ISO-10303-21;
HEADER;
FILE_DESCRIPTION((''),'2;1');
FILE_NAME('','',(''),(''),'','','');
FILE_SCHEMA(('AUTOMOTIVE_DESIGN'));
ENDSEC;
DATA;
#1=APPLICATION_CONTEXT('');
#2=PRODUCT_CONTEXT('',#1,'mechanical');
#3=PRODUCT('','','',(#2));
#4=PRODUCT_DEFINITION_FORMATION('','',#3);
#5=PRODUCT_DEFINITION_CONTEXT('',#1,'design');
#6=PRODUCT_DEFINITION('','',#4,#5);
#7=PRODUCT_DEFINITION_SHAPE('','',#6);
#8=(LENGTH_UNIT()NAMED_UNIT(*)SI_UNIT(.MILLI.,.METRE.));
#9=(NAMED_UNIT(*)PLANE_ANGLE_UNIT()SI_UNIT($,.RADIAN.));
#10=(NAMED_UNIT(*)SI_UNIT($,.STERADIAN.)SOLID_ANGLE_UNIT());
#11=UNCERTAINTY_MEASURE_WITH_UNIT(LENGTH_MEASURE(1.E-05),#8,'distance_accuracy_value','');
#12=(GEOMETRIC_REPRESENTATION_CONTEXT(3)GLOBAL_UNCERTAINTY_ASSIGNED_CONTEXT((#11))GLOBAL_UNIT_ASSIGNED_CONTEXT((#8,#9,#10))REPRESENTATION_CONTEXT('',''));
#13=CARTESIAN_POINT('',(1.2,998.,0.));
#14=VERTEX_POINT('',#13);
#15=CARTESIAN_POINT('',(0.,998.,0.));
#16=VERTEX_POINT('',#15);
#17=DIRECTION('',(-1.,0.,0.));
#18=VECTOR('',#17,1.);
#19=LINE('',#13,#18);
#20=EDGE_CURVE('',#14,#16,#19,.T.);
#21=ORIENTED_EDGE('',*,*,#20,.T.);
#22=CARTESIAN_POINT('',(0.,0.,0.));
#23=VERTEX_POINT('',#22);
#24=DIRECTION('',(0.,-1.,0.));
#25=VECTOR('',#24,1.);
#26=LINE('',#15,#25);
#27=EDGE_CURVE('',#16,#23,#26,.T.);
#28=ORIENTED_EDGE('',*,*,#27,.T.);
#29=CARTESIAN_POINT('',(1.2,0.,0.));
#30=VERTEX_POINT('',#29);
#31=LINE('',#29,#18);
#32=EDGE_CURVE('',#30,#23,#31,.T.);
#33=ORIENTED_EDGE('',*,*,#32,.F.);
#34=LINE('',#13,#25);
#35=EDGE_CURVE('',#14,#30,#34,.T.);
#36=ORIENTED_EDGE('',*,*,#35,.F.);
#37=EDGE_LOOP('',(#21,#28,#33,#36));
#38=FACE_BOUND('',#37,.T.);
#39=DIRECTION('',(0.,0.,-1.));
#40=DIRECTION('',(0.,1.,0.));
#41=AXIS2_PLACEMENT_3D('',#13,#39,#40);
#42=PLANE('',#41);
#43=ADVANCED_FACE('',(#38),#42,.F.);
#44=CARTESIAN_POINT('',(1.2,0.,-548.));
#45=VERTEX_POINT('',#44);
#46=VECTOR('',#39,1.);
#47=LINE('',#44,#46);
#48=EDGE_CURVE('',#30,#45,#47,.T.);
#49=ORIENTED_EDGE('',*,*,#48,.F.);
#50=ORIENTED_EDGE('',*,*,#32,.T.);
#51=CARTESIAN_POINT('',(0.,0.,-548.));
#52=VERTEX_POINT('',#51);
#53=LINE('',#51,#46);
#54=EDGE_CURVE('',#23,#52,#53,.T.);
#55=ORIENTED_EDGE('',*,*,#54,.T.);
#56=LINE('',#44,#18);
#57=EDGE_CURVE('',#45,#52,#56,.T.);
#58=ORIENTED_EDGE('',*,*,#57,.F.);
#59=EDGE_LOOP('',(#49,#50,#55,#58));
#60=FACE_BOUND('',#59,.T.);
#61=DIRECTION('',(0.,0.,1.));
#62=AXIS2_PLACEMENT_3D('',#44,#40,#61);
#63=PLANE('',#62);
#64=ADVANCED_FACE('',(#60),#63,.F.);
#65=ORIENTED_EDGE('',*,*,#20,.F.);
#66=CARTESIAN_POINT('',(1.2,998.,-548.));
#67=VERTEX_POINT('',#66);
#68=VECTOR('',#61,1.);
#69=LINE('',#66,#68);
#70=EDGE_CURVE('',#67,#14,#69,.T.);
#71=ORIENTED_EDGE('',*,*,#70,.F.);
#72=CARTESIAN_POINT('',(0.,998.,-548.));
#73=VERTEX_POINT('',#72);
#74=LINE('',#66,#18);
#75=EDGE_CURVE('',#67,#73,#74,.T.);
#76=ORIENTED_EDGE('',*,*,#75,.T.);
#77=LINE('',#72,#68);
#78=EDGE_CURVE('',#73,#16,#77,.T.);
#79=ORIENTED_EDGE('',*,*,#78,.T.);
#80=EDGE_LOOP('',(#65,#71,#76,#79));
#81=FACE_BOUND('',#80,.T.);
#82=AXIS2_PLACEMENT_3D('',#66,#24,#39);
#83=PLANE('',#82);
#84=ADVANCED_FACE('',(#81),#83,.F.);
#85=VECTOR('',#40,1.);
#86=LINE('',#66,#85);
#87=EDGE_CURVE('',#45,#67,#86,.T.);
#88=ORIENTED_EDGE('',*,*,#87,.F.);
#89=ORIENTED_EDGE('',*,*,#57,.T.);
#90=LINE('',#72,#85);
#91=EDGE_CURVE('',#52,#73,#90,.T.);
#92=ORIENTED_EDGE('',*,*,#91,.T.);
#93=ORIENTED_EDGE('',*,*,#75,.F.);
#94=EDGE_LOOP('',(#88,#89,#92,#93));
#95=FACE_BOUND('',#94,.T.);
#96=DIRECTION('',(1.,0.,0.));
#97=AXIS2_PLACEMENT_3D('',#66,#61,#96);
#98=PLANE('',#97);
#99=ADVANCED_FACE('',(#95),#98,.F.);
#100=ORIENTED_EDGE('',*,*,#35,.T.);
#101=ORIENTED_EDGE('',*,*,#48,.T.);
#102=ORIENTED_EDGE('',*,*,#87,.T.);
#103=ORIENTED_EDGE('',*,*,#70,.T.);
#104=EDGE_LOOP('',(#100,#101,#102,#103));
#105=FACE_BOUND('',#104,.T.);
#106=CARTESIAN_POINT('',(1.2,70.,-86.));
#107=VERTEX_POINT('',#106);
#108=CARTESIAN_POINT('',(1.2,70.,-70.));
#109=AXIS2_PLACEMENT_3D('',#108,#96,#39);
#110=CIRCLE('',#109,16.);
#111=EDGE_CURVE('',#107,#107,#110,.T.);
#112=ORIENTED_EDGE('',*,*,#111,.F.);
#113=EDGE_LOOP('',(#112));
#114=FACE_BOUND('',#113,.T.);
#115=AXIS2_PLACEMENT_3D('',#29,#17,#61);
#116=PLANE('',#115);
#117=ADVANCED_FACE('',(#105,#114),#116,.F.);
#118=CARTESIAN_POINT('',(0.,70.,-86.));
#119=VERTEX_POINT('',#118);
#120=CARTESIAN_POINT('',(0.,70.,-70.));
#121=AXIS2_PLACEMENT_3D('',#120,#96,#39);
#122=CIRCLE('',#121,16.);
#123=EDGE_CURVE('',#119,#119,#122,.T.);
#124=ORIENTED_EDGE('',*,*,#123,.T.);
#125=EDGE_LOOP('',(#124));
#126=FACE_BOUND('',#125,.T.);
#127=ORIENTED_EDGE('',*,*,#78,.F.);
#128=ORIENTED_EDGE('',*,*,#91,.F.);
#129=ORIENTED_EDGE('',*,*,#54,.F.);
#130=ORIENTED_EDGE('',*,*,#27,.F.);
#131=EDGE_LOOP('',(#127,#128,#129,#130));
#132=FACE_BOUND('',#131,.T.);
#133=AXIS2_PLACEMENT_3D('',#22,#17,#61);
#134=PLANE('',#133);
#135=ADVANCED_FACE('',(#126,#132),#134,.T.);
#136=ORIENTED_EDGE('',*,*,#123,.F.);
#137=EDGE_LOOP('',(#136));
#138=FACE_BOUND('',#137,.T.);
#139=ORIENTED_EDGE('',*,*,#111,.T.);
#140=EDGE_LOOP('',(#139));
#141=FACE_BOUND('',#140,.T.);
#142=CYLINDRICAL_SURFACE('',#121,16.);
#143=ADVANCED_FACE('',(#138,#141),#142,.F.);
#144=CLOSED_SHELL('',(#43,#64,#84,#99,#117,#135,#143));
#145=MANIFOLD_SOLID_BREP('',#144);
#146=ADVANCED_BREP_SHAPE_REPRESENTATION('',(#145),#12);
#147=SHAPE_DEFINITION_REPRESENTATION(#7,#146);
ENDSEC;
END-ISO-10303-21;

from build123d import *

# Parameters (mm, degrees)
BASEFLANGE_W       = 548
BASEFLANGE_H       = 998
BASE_FLANGE1_DEPTH = 1.2
SKETCH3_R          = 16
CUT_EXTRUDE2_DEPTH = 10


# Sheet-metal steps are written as plain solids
with BuildPart() as part:
    # BaseFlange → Base-Flange1 (new body)
    with BuildSketch(Plane(origin=(0, 0, 0), x_dir=(0, 0, -1), z_dir=(1, 0, 0))):
        with Locations((274, 499)):
            Rectangle(BASEFLANGE_W, BASEFLANGE_H)
    extrude(amount=BASE_FLANGE1_DEPTH)

    # Sketch3 → Cut-Extrude2 (cut)
    with BuildSketch(Plane(origin=(1.2, 0, 0), x_dir=(0, 0, -1), z_dir=(1, 0, 0))):
        with Locations((70, 70)):
            Circle(SKETCH3_R)
    extrude(amount=-CUT_EXTRUDE2_DEPTH, mode=Mode.SUBTRACT)


solid = part.part
